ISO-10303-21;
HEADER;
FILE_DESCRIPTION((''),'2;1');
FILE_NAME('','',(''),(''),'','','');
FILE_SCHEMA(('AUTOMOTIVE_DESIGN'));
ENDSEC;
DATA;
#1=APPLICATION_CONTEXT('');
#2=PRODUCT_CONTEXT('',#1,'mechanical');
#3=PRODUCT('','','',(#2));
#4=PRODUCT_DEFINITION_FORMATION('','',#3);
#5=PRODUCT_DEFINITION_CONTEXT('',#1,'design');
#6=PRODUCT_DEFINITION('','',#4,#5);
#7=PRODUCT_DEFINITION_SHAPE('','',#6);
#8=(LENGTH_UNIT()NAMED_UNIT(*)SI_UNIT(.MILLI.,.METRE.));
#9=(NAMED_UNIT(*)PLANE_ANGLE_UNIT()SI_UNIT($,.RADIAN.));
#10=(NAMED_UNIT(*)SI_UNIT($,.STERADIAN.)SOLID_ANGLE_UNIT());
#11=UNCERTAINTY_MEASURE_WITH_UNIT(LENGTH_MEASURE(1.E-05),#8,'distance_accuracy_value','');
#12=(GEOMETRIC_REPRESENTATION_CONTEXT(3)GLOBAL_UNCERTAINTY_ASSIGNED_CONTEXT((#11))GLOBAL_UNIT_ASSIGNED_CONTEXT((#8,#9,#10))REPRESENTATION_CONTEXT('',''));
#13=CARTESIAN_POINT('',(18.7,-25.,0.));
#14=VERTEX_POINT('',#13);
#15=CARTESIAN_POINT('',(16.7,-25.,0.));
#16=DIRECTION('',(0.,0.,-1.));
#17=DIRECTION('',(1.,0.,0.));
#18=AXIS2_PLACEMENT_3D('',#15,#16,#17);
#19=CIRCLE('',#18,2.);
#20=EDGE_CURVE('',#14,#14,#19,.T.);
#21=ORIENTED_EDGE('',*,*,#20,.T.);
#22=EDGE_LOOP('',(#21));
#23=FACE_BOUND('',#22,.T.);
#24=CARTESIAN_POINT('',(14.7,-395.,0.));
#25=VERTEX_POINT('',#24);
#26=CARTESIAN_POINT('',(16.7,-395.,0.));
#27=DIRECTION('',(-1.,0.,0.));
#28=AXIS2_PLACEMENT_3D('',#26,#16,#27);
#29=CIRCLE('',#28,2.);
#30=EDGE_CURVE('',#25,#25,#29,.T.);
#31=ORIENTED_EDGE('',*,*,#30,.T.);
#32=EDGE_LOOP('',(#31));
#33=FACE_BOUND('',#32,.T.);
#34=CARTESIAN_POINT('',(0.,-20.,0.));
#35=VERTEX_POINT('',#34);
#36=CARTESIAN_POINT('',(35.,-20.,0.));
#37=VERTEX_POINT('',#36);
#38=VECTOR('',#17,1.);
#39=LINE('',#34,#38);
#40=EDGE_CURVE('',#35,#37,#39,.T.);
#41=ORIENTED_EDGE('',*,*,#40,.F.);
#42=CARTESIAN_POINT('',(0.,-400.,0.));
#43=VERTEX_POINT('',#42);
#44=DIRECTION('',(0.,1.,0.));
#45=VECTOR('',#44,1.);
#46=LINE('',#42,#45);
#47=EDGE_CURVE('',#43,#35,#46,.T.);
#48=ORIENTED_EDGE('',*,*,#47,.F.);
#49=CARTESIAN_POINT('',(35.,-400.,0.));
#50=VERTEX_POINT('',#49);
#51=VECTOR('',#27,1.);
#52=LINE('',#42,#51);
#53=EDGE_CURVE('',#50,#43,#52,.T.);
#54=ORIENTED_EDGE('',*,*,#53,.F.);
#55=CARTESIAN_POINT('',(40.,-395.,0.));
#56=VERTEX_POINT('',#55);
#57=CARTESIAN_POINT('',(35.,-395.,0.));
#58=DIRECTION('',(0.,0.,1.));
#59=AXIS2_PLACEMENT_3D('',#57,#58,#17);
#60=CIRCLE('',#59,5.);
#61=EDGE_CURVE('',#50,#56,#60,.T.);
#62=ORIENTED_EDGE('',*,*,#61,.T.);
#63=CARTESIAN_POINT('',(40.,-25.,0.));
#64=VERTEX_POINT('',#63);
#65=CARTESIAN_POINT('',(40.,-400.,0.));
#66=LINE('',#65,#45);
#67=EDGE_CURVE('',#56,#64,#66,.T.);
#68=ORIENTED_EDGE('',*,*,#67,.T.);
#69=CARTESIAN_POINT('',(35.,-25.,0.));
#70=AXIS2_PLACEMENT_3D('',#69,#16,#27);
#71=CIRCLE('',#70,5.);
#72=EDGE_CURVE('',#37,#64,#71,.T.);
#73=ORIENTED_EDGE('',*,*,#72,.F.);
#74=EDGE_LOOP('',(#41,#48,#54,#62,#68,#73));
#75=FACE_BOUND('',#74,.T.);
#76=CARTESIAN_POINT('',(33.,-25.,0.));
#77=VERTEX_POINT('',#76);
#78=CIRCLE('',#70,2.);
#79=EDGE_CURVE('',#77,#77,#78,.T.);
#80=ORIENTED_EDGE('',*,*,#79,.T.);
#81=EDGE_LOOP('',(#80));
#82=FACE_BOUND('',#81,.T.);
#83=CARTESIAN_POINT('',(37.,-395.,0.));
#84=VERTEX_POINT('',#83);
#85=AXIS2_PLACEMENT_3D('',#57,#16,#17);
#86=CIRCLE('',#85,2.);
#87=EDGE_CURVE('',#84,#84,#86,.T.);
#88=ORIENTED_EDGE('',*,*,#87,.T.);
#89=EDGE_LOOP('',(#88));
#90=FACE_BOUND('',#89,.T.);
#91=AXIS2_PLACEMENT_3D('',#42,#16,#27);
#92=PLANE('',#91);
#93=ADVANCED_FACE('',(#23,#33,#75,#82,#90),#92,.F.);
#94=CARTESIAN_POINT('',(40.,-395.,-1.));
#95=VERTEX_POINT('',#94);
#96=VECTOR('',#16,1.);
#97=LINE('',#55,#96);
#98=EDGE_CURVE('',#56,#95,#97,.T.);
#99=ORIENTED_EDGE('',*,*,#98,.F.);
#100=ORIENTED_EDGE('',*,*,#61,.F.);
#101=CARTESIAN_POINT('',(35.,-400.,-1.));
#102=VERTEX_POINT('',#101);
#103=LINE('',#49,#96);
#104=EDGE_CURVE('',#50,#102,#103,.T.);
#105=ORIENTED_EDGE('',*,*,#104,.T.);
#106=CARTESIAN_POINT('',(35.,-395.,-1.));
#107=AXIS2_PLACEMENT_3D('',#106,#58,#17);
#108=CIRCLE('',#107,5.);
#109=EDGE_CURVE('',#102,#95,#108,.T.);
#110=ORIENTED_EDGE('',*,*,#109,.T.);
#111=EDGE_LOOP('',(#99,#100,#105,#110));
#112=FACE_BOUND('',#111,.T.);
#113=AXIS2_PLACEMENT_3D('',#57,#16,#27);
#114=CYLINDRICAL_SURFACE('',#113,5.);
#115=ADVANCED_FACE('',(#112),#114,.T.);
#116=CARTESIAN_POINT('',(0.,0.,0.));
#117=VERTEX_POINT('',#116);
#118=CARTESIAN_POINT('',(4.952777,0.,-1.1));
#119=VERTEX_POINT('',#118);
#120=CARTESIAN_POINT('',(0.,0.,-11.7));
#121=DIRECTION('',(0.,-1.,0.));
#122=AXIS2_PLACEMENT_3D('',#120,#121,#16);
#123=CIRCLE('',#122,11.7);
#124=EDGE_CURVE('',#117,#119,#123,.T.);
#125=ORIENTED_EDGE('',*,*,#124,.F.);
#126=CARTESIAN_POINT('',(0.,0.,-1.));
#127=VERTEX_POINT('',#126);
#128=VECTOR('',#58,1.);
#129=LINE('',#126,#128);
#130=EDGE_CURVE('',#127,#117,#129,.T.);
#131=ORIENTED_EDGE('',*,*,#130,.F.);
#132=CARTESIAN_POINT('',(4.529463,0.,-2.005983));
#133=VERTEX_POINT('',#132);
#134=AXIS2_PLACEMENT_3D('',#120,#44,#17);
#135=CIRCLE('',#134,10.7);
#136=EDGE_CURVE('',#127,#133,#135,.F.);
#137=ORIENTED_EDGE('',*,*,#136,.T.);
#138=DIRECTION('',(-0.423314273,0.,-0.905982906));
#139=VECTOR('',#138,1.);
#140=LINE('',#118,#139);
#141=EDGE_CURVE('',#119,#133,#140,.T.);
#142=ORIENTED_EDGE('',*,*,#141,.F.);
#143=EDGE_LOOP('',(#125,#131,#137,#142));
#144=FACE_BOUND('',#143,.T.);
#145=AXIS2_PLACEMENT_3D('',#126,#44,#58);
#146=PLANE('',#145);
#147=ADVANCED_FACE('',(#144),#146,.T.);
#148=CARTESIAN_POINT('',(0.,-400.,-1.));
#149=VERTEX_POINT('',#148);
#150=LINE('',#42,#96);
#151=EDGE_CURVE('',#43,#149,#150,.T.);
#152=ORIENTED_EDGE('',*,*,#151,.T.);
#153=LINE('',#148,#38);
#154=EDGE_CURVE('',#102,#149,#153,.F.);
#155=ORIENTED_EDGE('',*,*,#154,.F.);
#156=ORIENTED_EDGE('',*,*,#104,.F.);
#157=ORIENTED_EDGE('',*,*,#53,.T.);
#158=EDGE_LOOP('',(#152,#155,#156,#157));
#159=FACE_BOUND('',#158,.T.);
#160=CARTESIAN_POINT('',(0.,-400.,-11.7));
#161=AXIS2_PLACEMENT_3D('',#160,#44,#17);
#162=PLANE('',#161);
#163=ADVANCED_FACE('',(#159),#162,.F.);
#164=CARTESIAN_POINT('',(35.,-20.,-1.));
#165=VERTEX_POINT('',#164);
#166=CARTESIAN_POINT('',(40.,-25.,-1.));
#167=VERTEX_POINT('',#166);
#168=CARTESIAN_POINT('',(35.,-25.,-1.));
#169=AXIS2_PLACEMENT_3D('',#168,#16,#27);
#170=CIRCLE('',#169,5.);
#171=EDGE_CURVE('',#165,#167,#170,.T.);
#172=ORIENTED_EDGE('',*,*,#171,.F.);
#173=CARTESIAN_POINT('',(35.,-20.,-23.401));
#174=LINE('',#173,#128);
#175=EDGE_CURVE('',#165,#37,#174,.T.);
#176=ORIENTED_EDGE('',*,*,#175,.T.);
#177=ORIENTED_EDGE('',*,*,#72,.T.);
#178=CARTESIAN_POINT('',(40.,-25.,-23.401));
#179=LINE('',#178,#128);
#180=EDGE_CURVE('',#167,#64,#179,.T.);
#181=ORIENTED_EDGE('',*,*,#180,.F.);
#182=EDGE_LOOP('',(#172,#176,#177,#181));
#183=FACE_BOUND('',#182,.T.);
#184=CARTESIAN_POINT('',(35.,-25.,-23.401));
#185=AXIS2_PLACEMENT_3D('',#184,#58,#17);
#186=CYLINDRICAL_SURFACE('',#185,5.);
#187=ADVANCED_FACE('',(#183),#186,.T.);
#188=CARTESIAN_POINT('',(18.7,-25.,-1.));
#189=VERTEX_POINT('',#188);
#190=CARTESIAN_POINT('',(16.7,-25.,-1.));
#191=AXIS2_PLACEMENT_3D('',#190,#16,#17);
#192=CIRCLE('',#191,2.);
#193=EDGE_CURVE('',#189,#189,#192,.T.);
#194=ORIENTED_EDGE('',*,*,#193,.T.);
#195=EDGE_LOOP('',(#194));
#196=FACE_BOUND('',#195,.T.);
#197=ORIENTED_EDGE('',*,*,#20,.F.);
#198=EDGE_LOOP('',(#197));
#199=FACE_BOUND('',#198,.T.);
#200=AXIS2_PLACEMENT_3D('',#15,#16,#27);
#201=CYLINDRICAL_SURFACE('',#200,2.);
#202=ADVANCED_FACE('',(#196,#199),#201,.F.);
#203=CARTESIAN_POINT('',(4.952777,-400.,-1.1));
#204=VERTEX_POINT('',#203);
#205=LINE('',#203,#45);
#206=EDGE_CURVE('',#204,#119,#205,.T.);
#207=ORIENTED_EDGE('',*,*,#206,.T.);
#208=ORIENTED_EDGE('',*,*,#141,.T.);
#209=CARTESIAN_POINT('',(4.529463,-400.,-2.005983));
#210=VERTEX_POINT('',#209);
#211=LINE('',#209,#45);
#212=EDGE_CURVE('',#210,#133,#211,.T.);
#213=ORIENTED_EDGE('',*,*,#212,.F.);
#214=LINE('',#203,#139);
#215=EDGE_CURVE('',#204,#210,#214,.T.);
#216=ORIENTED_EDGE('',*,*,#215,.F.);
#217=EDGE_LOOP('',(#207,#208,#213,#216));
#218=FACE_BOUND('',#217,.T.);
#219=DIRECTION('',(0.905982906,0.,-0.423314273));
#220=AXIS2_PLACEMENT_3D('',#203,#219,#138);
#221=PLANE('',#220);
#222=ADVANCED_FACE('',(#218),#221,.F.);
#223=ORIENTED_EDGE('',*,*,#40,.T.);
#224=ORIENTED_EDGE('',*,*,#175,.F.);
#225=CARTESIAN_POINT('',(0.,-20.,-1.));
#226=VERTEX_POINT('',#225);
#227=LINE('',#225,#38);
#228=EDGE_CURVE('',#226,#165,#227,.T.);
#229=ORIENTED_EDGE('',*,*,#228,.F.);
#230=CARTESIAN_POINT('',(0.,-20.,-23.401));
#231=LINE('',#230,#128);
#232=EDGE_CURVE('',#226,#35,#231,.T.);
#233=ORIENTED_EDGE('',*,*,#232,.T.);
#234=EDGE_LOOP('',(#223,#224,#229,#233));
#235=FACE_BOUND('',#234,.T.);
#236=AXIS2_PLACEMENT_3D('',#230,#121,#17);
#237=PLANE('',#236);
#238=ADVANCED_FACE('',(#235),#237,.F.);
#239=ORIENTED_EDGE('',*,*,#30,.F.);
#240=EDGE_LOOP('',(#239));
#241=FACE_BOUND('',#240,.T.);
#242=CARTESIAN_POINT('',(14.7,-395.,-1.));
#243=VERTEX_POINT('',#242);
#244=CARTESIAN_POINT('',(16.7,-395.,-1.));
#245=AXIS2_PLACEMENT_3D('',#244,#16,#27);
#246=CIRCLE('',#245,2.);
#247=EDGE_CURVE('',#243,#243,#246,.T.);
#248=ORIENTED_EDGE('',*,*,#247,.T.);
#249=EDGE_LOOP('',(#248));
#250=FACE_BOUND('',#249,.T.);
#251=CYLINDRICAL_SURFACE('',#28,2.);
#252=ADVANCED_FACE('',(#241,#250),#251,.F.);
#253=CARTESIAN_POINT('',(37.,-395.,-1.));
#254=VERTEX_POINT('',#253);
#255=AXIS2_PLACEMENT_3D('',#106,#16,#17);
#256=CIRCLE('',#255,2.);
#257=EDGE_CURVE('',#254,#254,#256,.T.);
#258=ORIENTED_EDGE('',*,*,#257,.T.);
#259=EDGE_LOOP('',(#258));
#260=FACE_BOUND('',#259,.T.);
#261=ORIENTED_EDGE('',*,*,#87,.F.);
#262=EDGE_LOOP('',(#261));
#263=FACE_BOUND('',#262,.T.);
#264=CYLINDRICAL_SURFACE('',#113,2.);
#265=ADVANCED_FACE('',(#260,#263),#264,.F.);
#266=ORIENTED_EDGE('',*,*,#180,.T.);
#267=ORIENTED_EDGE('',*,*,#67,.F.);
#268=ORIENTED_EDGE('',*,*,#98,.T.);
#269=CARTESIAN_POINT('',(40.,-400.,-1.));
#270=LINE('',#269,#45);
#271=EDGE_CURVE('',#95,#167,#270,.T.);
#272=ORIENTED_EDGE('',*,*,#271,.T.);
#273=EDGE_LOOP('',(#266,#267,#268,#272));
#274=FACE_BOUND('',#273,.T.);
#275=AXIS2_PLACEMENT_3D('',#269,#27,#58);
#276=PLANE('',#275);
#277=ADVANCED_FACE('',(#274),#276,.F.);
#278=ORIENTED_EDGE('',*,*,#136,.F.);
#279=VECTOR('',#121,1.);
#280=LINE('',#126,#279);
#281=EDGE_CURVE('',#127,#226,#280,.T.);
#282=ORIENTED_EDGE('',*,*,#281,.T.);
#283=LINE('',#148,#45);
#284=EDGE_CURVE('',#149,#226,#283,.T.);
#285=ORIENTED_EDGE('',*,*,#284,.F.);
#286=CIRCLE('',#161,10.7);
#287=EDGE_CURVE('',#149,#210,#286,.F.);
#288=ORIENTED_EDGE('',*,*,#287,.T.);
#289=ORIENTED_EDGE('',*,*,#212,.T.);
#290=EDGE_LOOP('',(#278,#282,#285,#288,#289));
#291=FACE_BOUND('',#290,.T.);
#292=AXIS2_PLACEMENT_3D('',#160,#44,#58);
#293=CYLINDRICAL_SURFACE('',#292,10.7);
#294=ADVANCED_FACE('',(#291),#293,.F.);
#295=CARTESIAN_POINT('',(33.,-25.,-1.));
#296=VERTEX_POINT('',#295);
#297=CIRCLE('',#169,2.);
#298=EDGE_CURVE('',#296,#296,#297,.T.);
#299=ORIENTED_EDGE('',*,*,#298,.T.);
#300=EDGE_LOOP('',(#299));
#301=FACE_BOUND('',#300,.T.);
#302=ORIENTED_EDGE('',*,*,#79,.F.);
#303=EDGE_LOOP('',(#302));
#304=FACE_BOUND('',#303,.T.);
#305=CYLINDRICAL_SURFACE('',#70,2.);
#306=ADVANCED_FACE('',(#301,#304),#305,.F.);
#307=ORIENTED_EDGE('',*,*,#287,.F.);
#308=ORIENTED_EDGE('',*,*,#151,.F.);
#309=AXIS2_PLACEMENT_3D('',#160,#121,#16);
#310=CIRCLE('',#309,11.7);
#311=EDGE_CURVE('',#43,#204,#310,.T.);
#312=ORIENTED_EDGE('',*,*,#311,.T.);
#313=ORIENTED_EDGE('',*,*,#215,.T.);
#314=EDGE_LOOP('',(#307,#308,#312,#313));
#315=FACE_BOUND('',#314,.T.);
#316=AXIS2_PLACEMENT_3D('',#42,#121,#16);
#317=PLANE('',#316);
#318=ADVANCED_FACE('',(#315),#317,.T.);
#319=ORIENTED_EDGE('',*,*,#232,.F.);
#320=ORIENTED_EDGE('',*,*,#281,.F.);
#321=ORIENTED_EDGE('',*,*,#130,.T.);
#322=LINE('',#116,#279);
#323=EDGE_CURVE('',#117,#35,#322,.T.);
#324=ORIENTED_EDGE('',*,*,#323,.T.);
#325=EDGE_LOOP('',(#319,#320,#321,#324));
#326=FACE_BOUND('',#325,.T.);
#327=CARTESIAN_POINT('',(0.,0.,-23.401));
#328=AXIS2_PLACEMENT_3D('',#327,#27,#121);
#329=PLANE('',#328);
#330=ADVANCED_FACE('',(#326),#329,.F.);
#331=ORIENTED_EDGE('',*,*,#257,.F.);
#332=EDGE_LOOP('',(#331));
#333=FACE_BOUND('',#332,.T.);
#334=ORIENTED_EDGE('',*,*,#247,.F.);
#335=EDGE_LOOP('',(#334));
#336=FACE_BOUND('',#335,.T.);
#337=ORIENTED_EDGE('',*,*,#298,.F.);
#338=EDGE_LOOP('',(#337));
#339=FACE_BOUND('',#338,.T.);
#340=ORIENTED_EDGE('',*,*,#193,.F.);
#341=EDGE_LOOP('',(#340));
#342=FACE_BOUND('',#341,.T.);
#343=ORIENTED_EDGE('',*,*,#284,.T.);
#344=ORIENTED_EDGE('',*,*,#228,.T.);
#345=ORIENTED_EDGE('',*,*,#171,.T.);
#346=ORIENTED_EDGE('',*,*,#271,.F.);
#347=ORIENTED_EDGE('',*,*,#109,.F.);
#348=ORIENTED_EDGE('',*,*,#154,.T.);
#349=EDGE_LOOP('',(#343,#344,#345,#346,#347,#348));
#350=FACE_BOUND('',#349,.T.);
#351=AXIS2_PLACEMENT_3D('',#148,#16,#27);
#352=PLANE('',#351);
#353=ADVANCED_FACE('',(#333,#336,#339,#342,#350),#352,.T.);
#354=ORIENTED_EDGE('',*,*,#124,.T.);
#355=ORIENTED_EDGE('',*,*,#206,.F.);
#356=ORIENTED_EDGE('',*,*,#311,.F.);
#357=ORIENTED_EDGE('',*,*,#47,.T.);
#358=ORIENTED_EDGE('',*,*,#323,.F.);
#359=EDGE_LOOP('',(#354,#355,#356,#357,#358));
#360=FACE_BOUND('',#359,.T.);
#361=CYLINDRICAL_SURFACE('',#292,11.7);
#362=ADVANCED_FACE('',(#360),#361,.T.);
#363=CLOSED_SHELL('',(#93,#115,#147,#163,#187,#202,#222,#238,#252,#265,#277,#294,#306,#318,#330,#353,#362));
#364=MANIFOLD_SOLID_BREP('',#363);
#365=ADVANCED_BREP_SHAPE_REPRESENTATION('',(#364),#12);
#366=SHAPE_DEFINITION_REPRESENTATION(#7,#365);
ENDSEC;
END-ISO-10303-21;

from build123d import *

# Parameters (mm, degrees)
ODGI_CIE_BAZOWE1_DEPTH     = 400
WYTNIJ_WYCI_GNI_CIE1_REACH = 404.676
OTWORY_POD_NITY_R          = 2
WYTNIJ_WYCI_GNI_CIE2_DEPTH = 403.618628481


# Sheet-metal steps are written as plain solids
with BuildPart() as part:
    # Szkic1 → Odgięcie bazowe1 (new body)
    with BuildSketch(Plane(origin=(0, 0, 0), x_dir=(1, 0, 0), z_dir=(0, 1, 0))):
        with BuildLine():
            ThreePointArc((4.952776999, 1.1), (-2.536730179, 23.121689892), (0, 0))
            Line((0, 0), (40, 0))
            Line((40, 0), (40, 1))
            Line((40, 1), (0, 1))
            ThreePointArc((0, 1), (-2.319915634, 22.145477081), (4.529462725, 2.005982906))
            Line((4.529462725, 2.005982906), (4.952776999, 1.1))
        make_face()
    extrude(amount=-ODGI_CIE_BAZOWE1_DEPTH)

    # Szkic6 → Wytnij-wyciągnięcie1 (cut, up to next)
    with BuildSketch(Plane.XY, mode=Mode.PRIVATE) as wytnij_wyci_gni_cie1_sk1:
        with BuildLine():
            Line((0, 0), (0, -20))
            Line((0, -20), (35, -20))
            ThreePointArc((35, -20), (38.535533906, -21.464466094), (40, -25))
            Line((40, -25), (40, -20))
            Line((40, -20), (40, 0))
            Line((40, 0), (0, 0))
        make_face()
    wytnij_wyci_gni_cie1_tool1 = extrude(wytnij_wyci_gni_cie1_sk1.sketch, amount=-WYTNIJ_WYCI_GNI_CIE1_REACH, mode=Mode.PRIVATE) & part.part
    add(wytnij_wyci_gni_cie1_tool1.solids().sort_by_distance((20.125793, -10.074056, 0))[0], mode=Mode.SUBTRACT)

    # otwory pod nity → Wytnij-wyciągnięcie2 (cut, through all)
    with BuildSketch(Plane(origin=(0, 0, -1), x_dir=(-1, 0, 0), z_dir=(0, 0, -1))):
        with Locations((-35, -25)):
            Circle(OTWORY_POD_NITY_R)
        with Locations(Location((-16.7, -25, 0), (0, 0, 180))):
            Circle(OTWORY_POD_NITY_R)
        with Locations((-16.7, -395)):
            Circle(OTWORY_POD_NITY_R)
        with Locations(Location((-35, -395, 0), (0, 0, 180))):
            Circle(OTWORY_POD_NITY_R)
        with BuildLine():
            Line((-35, -400), (-40, -400))
            Line((-40, -400), (-40, -395))
            ThreePointArc((-40, -395), (-38.535533906, -398.535533906), (-35, -400))
        make_face()
    extrude(amount=-WYTNIJ_WYCI_GNI_CIE2_DEPTH, mode=Mode.SUBTRACT)


solid = part.part
